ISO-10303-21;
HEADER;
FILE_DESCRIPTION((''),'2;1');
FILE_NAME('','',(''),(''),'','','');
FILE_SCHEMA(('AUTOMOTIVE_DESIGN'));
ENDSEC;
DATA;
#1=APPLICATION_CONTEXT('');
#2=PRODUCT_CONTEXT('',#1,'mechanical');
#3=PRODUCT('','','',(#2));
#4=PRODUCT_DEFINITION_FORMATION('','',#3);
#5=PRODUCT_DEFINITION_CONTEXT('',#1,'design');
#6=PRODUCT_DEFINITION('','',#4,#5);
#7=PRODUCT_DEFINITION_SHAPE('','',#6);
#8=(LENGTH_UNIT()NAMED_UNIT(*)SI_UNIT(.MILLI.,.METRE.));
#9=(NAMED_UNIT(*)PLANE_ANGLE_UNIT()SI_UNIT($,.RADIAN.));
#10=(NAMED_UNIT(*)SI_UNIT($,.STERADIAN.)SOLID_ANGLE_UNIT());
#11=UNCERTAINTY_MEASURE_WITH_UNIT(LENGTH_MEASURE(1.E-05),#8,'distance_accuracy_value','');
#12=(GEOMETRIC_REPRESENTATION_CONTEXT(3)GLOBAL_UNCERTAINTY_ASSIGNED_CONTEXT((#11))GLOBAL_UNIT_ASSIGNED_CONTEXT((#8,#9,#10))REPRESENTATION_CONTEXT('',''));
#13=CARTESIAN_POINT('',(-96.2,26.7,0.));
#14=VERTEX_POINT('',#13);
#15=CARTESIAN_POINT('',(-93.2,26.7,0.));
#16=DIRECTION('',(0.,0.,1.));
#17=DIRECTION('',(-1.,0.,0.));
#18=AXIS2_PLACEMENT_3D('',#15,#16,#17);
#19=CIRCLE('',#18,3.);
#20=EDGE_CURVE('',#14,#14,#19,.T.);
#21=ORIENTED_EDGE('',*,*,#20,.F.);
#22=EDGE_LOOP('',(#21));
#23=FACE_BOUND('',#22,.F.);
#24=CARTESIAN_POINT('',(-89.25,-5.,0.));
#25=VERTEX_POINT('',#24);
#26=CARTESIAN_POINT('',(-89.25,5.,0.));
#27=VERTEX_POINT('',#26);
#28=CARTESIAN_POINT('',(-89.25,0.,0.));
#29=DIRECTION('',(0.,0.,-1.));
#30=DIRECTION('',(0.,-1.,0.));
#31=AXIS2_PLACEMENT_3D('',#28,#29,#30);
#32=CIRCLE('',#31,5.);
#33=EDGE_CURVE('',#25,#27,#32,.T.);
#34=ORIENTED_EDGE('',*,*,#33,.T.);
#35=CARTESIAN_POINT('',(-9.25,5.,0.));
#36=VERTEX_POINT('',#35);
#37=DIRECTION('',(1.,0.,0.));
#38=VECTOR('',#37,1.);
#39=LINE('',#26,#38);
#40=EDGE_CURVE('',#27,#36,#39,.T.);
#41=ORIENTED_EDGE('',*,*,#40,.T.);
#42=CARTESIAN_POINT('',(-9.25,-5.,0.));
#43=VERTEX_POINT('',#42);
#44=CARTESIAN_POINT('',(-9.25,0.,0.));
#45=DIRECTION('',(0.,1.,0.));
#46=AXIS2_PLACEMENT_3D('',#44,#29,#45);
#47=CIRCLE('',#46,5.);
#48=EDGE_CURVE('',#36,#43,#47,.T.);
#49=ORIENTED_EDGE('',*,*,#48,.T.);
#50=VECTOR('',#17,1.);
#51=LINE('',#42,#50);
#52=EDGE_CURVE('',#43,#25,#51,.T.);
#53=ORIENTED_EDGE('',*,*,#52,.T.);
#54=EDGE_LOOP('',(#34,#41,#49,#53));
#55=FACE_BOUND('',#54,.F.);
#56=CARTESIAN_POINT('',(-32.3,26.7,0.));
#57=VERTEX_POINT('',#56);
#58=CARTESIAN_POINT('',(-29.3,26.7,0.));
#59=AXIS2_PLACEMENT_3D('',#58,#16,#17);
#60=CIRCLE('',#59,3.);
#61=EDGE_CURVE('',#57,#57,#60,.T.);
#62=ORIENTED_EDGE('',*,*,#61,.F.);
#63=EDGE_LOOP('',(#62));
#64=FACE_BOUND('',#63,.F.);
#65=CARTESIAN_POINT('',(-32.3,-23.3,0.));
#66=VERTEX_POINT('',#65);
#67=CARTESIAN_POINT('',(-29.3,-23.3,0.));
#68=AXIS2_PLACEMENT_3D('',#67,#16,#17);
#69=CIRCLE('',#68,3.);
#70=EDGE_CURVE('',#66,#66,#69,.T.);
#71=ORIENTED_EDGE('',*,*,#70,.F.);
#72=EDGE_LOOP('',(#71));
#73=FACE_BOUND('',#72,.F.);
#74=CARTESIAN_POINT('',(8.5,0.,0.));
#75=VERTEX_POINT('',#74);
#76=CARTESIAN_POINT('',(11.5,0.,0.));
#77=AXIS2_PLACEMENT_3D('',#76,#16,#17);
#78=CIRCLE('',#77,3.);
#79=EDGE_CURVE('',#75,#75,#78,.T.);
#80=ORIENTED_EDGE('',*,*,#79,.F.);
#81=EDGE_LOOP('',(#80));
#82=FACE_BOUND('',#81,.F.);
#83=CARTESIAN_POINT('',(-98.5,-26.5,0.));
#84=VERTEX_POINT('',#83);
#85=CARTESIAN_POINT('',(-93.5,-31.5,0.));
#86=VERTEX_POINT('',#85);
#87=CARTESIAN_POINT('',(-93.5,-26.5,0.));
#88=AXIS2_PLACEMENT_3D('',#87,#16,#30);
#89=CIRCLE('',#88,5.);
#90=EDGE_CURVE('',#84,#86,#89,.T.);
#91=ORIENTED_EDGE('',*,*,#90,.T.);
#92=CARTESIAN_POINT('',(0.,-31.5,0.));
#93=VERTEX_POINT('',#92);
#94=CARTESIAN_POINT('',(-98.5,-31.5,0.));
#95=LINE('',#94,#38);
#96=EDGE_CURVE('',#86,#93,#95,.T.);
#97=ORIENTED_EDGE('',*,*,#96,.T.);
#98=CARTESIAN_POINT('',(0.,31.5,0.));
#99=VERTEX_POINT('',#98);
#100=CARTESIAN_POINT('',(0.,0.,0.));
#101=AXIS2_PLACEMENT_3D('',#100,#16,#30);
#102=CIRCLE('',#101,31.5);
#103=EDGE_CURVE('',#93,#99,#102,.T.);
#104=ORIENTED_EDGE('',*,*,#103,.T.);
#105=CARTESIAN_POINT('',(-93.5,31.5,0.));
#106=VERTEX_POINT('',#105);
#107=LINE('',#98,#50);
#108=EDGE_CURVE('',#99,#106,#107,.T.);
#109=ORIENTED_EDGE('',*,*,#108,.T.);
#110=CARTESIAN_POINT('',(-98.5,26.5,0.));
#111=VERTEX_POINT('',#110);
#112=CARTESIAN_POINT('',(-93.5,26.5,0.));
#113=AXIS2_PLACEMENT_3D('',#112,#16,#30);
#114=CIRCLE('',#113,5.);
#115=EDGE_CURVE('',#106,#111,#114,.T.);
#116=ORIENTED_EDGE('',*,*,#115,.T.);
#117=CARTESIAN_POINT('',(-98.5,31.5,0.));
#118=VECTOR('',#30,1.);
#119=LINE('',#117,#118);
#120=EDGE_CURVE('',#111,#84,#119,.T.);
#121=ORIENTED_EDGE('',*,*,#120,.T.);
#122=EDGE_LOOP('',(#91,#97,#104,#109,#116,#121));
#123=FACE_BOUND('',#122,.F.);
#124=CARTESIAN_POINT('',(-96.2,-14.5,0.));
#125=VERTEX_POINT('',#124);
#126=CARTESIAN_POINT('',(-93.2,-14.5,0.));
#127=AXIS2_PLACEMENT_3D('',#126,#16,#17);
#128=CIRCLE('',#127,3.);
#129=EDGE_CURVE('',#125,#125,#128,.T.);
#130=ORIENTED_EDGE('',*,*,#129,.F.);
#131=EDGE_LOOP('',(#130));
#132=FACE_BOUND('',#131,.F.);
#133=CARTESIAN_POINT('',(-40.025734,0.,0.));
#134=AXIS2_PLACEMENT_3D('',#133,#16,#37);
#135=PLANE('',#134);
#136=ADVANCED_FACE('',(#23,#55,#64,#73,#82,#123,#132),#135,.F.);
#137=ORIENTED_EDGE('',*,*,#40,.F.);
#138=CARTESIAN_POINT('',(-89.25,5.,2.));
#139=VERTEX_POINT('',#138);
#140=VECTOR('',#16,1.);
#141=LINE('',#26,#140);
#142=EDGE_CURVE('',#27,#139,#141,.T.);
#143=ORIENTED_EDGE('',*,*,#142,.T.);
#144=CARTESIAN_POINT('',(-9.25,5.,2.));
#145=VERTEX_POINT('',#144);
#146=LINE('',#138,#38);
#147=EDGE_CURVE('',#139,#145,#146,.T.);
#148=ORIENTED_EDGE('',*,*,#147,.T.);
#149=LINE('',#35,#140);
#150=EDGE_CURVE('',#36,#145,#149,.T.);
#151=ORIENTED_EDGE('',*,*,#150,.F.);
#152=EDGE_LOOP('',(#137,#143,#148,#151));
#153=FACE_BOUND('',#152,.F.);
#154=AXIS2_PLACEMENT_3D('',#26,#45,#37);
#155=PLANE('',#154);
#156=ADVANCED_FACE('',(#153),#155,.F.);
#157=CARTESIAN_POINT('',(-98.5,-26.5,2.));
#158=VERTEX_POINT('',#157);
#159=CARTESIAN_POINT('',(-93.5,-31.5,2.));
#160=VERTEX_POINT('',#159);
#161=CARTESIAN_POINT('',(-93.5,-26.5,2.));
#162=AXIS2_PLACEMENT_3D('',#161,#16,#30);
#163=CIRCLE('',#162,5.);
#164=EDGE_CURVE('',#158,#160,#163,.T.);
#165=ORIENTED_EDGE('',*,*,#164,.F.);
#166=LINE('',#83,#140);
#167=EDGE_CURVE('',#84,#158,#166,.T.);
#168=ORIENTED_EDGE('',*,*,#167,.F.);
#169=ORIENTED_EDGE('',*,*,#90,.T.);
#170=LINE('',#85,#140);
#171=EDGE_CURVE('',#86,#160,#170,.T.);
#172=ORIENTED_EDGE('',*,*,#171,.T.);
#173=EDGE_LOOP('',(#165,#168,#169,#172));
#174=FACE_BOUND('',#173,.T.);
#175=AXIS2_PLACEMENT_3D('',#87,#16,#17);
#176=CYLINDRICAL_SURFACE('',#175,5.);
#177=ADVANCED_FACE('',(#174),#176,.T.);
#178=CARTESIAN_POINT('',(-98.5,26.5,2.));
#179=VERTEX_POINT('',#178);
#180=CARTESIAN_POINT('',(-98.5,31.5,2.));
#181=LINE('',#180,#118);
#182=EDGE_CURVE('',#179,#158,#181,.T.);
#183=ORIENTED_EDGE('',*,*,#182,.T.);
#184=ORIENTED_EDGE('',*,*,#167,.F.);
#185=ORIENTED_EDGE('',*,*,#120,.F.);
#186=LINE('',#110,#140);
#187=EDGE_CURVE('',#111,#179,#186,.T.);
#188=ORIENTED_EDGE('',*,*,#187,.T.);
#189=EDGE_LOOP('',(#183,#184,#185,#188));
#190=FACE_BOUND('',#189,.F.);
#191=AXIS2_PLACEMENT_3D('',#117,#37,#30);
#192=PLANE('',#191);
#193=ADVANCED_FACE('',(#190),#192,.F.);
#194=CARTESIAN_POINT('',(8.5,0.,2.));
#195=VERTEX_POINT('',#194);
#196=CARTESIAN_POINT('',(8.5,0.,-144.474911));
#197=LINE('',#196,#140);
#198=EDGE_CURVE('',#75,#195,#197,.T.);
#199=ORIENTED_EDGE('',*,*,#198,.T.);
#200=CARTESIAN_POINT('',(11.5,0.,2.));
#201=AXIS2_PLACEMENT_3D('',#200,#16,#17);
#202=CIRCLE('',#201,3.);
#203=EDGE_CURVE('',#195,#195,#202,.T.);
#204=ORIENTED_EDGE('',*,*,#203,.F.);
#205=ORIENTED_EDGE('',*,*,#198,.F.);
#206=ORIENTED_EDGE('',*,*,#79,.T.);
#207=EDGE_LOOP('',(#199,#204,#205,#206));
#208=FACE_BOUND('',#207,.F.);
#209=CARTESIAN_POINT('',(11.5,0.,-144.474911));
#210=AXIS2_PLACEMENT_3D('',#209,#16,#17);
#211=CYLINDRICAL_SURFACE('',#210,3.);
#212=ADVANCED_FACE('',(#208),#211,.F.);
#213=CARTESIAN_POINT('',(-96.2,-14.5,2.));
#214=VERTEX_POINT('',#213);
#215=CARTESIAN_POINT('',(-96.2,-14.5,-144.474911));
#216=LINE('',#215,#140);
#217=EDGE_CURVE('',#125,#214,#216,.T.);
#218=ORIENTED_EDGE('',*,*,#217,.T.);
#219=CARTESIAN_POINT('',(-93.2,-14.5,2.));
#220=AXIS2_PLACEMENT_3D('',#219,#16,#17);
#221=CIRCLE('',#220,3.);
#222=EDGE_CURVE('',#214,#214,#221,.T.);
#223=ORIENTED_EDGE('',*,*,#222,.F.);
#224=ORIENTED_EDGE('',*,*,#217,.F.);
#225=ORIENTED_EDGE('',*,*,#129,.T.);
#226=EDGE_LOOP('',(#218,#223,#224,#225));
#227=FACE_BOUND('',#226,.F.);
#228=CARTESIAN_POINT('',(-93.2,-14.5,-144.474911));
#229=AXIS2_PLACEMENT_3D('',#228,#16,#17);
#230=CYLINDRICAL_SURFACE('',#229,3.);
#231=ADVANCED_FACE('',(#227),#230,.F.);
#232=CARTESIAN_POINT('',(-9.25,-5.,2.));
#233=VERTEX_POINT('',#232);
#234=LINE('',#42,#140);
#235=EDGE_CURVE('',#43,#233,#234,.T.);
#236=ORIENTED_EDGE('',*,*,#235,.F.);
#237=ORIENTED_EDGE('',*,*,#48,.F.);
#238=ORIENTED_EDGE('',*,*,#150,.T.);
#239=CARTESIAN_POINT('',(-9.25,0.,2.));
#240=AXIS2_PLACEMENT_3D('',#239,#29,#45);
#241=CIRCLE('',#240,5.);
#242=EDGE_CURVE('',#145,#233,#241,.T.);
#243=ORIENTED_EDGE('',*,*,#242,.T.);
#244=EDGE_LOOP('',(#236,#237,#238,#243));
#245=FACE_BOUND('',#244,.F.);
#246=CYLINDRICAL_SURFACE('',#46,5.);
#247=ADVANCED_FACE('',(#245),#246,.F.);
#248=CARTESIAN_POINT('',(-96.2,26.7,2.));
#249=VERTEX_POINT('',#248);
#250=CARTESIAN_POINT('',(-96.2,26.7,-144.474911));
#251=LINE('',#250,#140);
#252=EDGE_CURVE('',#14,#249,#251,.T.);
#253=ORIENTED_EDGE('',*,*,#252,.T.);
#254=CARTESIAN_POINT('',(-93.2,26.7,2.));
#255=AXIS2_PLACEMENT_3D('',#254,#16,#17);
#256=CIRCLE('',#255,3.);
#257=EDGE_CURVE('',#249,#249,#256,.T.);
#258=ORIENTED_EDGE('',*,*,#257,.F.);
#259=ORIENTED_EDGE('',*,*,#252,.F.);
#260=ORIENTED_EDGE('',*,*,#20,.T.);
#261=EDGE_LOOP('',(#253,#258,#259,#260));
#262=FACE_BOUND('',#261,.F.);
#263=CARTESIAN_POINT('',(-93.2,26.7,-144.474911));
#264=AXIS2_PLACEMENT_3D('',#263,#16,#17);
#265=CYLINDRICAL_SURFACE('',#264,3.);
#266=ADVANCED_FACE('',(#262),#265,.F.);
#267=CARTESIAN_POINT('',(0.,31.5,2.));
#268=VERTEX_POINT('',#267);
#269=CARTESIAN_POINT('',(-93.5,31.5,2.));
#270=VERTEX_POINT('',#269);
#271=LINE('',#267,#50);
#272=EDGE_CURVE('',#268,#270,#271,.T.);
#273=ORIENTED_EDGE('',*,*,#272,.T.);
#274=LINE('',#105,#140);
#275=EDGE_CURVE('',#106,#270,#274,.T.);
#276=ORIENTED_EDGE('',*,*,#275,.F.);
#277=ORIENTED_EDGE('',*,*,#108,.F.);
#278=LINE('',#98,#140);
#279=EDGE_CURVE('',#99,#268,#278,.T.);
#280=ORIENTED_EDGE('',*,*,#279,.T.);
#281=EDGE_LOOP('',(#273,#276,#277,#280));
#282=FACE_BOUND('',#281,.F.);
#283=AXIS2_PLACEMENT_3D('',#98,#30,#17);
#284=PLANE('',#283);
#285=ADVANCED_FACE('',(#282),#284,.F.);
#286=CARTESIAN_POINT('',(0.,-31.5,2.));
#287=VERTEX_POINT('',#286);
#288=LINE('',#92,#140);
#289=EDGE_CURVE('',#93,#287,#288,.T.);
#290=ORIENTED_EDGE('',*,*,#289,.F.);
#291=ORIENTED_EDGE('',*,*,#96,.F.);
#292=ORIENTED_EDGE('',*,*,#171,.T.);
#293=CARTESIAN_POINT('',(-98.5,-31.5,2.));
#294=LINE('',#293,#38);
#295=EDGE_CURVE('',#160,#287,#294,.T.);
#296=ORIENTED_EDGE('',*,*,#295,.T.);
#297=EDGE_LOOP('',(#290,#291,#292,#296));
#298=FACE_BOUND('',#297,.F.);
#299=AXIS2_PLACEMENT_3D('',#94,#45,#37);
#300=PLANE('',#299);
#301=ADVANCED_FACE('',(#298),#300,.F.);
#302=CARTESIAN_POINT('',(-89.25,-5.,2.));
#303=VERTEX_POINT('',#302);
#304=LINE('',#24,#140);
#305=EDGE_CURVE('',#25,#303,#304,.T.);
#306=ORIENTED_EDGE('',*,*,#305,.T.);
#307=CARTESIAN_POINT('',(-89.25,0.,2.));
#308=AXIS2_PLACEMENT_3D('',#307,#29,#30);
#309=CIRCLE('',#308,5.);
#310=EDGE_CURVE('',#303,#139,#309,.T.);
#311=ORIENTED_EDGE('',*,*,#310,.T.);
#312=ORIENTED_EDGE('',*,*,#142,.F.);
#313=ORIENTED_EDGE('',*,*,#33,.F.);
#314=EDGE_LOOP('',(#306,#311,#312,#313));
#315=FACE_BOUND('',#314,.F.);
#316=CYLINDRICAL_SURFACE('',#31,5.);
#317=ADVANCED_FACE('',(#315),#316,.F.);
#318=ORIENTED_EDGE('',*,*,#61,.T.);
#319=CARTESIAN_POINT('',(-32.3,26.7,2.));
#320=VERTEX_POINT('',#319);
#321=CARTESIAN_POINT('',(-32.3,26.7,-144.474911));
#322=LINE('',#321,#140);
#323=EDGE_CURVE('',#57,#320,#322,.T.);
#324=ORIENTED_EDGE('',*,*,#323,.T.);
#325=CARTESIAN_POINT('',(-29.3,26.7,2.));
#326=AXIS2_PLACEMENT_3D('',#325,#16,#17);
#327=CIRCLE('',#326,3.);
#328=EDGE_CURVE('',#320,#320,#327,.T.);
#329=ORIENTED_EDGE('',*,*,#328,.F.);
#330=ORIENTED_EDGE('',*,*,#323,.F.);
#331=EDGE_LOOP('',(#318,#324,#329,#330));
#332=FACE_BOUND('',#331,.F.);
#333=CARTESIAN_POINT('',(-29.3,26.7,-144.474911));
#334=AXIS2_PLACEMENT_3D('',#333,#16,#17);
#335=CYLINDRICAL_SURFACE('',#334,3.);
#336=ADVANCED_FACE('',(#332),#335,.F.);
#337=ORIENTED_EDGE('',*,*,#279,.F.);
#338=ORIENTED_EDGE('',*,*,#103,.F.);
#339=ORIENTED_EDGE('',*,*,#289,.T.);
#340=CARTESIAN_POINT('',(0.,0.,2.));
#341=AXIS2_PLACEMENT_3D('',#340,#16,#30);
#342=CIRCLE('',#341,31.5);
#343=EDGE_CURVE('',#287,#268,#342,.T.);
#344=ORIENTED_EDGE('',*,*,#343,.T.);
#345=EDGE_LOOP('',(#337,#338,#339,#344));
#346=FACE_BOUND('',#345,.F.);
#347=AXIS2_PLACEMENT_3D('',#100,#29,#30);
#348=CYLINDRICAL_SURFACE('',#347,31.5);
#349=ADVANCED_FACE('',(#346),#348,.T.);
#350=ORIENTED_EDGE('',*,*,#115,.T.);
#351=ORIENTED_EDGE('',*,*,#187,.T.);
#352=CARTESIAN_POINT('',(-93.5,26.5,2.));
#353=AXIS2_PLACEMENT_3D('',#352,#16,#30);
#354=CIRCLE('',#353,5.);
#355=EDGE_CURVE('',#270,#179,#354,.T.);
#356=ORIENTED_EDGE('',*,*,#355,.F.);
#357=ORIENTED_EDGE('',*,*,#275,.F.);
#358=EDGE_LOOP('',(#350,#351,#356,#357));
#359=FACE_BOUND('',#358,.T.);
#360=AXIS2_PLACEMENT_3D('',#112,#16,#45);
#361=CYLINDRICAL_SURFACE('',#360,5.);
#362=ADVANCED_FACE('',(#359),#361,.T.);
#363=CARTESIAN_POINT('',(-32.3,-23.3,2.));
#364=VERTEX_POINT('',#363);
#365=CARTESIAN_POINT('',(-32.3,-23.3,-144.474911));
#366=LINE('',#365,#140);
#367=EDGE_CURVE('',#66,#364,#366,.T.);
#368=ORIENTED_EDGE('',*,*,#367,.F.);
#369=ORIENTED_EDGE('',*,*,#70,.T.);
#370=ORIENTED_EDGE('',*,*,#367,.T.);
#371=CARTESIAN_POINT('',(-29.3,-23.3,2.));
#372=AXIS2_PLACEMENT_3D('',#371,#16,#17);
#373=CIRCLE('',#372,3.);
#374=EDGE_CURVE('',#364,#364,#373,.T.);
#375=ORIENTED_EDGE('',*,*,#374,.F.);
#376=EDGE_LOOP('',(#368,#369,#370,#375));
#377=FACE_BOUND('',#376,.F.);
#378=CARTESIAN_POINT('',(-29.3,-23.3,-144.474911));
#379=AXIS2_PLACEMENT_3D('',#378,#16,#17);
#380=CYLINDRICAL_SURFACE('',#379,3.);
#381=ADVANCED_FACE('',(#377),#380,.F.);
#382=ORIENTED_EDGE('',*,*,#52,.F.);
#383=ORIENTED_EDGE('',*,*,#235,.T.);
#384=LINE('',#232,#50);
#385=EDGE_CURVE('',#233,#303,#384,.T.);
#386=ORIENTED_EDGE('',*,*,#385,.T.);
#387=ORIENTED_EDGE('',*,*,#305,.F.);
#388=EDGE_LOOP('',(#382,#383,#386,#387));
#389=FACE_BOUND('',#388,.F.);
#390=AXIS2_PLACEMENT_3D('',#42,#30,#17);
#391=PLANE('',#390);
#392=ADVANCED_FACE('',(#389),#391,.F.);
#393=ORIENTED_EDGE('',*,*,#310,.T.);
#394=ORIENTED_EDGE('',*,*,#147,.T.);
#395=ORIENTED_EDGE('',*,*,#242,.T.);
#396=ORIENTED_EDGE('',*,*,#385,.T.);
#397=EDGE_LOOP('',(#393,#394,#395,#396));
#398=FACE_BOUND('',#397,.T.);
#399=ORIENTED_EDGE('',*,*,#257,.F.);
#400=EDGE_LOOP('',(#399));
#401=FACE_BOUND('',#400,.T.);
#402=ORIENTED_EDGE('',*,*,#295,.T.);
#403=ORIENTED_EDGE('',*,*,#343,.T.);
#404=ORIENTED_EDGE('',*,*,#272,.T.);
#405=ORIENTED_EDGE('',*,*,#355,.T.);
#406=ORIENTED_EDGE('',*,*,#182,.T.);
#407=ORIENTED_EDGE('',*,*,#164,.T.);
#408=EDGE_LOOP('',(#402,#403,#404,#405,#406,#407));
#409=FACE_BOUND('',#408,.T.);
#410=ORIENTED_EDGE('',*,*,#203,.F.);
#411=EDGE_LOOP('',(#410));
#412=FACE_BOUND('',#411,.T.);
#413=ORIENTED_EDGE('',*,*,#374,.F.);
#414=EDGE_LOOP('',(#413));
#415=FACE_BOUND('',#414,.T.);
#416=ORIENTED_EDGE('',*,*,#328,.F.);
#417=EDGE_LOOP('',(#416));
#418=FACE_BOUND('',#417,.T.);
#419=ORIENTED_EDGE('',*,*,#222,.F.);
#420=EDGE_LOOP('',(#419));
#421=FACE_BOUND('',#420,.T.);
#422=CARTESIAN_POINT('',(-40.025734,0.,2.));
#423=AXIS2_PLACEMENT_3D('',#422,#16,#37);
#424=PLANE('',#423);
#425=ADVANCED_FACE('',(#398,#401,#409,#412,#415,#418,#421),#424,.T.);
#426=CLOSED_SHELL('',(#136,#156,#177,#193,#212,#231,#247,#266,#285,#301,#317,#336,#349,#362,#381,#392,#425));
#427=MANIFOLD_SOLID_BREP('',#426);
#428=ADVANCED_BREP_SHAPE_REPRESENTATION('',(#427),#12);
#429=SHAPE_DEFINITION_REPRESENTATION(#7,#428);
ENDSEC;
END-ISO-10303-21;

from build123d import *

# Parameters (mm, degrees)
F1_DEPTH = 2
F2_D     = 6
F3_R     = 5


with BuildPart() as f1:
    # F0 (on Top) → F1 (new body)
    with BuildSketch(Plane.XY):
        with BuildLine():
            Line((0, 31.5), (-98.5, 31.5))
            Line((-98.5, 31.5), (-98.5, -31.5))
            Line((-98.5, -31.5), (0, -31.5))
            ThreePointArc((0, -31.5), (31.5, 0), (0, 31.5))
        make_face()
        with BuildLine():
            Line((-9.25, -5), (-89.25, -5))
            ThreePointArc((-89.25, -5), (-94.25, 0), (-89.25, 5))
            Line((-89.25, 5), (-9.25, 5))
            ThreePointArc((-9.25, 5), (-4.25, 0), (-9.25, -5))
        make_face(mode=Mode.SUBTRACT)
    extrude(amount=F1_DEPTH)

    # F2 (through all)
    with Locations(Plane(origin=(0, 0, 0), x_dir=(1, 0, 0), z_dir=(0, 0, -1))):
        with Locations((-93.2, -26.7), (-93.2, 14.5), (-29.3, -26.7), (-29.3, 23.3), (11.5, 0)):
            Hole(F2_D / 2)

    # F3
    f3_edges = [f1.edges().sort_by_distance(p)[0] for p in [
        (-98.5, 31.5, 1),
        (-98.5, -31.5, 1),
    ]]
    fillet(f3_edges, radius=F3_R)


solid = f1.part
